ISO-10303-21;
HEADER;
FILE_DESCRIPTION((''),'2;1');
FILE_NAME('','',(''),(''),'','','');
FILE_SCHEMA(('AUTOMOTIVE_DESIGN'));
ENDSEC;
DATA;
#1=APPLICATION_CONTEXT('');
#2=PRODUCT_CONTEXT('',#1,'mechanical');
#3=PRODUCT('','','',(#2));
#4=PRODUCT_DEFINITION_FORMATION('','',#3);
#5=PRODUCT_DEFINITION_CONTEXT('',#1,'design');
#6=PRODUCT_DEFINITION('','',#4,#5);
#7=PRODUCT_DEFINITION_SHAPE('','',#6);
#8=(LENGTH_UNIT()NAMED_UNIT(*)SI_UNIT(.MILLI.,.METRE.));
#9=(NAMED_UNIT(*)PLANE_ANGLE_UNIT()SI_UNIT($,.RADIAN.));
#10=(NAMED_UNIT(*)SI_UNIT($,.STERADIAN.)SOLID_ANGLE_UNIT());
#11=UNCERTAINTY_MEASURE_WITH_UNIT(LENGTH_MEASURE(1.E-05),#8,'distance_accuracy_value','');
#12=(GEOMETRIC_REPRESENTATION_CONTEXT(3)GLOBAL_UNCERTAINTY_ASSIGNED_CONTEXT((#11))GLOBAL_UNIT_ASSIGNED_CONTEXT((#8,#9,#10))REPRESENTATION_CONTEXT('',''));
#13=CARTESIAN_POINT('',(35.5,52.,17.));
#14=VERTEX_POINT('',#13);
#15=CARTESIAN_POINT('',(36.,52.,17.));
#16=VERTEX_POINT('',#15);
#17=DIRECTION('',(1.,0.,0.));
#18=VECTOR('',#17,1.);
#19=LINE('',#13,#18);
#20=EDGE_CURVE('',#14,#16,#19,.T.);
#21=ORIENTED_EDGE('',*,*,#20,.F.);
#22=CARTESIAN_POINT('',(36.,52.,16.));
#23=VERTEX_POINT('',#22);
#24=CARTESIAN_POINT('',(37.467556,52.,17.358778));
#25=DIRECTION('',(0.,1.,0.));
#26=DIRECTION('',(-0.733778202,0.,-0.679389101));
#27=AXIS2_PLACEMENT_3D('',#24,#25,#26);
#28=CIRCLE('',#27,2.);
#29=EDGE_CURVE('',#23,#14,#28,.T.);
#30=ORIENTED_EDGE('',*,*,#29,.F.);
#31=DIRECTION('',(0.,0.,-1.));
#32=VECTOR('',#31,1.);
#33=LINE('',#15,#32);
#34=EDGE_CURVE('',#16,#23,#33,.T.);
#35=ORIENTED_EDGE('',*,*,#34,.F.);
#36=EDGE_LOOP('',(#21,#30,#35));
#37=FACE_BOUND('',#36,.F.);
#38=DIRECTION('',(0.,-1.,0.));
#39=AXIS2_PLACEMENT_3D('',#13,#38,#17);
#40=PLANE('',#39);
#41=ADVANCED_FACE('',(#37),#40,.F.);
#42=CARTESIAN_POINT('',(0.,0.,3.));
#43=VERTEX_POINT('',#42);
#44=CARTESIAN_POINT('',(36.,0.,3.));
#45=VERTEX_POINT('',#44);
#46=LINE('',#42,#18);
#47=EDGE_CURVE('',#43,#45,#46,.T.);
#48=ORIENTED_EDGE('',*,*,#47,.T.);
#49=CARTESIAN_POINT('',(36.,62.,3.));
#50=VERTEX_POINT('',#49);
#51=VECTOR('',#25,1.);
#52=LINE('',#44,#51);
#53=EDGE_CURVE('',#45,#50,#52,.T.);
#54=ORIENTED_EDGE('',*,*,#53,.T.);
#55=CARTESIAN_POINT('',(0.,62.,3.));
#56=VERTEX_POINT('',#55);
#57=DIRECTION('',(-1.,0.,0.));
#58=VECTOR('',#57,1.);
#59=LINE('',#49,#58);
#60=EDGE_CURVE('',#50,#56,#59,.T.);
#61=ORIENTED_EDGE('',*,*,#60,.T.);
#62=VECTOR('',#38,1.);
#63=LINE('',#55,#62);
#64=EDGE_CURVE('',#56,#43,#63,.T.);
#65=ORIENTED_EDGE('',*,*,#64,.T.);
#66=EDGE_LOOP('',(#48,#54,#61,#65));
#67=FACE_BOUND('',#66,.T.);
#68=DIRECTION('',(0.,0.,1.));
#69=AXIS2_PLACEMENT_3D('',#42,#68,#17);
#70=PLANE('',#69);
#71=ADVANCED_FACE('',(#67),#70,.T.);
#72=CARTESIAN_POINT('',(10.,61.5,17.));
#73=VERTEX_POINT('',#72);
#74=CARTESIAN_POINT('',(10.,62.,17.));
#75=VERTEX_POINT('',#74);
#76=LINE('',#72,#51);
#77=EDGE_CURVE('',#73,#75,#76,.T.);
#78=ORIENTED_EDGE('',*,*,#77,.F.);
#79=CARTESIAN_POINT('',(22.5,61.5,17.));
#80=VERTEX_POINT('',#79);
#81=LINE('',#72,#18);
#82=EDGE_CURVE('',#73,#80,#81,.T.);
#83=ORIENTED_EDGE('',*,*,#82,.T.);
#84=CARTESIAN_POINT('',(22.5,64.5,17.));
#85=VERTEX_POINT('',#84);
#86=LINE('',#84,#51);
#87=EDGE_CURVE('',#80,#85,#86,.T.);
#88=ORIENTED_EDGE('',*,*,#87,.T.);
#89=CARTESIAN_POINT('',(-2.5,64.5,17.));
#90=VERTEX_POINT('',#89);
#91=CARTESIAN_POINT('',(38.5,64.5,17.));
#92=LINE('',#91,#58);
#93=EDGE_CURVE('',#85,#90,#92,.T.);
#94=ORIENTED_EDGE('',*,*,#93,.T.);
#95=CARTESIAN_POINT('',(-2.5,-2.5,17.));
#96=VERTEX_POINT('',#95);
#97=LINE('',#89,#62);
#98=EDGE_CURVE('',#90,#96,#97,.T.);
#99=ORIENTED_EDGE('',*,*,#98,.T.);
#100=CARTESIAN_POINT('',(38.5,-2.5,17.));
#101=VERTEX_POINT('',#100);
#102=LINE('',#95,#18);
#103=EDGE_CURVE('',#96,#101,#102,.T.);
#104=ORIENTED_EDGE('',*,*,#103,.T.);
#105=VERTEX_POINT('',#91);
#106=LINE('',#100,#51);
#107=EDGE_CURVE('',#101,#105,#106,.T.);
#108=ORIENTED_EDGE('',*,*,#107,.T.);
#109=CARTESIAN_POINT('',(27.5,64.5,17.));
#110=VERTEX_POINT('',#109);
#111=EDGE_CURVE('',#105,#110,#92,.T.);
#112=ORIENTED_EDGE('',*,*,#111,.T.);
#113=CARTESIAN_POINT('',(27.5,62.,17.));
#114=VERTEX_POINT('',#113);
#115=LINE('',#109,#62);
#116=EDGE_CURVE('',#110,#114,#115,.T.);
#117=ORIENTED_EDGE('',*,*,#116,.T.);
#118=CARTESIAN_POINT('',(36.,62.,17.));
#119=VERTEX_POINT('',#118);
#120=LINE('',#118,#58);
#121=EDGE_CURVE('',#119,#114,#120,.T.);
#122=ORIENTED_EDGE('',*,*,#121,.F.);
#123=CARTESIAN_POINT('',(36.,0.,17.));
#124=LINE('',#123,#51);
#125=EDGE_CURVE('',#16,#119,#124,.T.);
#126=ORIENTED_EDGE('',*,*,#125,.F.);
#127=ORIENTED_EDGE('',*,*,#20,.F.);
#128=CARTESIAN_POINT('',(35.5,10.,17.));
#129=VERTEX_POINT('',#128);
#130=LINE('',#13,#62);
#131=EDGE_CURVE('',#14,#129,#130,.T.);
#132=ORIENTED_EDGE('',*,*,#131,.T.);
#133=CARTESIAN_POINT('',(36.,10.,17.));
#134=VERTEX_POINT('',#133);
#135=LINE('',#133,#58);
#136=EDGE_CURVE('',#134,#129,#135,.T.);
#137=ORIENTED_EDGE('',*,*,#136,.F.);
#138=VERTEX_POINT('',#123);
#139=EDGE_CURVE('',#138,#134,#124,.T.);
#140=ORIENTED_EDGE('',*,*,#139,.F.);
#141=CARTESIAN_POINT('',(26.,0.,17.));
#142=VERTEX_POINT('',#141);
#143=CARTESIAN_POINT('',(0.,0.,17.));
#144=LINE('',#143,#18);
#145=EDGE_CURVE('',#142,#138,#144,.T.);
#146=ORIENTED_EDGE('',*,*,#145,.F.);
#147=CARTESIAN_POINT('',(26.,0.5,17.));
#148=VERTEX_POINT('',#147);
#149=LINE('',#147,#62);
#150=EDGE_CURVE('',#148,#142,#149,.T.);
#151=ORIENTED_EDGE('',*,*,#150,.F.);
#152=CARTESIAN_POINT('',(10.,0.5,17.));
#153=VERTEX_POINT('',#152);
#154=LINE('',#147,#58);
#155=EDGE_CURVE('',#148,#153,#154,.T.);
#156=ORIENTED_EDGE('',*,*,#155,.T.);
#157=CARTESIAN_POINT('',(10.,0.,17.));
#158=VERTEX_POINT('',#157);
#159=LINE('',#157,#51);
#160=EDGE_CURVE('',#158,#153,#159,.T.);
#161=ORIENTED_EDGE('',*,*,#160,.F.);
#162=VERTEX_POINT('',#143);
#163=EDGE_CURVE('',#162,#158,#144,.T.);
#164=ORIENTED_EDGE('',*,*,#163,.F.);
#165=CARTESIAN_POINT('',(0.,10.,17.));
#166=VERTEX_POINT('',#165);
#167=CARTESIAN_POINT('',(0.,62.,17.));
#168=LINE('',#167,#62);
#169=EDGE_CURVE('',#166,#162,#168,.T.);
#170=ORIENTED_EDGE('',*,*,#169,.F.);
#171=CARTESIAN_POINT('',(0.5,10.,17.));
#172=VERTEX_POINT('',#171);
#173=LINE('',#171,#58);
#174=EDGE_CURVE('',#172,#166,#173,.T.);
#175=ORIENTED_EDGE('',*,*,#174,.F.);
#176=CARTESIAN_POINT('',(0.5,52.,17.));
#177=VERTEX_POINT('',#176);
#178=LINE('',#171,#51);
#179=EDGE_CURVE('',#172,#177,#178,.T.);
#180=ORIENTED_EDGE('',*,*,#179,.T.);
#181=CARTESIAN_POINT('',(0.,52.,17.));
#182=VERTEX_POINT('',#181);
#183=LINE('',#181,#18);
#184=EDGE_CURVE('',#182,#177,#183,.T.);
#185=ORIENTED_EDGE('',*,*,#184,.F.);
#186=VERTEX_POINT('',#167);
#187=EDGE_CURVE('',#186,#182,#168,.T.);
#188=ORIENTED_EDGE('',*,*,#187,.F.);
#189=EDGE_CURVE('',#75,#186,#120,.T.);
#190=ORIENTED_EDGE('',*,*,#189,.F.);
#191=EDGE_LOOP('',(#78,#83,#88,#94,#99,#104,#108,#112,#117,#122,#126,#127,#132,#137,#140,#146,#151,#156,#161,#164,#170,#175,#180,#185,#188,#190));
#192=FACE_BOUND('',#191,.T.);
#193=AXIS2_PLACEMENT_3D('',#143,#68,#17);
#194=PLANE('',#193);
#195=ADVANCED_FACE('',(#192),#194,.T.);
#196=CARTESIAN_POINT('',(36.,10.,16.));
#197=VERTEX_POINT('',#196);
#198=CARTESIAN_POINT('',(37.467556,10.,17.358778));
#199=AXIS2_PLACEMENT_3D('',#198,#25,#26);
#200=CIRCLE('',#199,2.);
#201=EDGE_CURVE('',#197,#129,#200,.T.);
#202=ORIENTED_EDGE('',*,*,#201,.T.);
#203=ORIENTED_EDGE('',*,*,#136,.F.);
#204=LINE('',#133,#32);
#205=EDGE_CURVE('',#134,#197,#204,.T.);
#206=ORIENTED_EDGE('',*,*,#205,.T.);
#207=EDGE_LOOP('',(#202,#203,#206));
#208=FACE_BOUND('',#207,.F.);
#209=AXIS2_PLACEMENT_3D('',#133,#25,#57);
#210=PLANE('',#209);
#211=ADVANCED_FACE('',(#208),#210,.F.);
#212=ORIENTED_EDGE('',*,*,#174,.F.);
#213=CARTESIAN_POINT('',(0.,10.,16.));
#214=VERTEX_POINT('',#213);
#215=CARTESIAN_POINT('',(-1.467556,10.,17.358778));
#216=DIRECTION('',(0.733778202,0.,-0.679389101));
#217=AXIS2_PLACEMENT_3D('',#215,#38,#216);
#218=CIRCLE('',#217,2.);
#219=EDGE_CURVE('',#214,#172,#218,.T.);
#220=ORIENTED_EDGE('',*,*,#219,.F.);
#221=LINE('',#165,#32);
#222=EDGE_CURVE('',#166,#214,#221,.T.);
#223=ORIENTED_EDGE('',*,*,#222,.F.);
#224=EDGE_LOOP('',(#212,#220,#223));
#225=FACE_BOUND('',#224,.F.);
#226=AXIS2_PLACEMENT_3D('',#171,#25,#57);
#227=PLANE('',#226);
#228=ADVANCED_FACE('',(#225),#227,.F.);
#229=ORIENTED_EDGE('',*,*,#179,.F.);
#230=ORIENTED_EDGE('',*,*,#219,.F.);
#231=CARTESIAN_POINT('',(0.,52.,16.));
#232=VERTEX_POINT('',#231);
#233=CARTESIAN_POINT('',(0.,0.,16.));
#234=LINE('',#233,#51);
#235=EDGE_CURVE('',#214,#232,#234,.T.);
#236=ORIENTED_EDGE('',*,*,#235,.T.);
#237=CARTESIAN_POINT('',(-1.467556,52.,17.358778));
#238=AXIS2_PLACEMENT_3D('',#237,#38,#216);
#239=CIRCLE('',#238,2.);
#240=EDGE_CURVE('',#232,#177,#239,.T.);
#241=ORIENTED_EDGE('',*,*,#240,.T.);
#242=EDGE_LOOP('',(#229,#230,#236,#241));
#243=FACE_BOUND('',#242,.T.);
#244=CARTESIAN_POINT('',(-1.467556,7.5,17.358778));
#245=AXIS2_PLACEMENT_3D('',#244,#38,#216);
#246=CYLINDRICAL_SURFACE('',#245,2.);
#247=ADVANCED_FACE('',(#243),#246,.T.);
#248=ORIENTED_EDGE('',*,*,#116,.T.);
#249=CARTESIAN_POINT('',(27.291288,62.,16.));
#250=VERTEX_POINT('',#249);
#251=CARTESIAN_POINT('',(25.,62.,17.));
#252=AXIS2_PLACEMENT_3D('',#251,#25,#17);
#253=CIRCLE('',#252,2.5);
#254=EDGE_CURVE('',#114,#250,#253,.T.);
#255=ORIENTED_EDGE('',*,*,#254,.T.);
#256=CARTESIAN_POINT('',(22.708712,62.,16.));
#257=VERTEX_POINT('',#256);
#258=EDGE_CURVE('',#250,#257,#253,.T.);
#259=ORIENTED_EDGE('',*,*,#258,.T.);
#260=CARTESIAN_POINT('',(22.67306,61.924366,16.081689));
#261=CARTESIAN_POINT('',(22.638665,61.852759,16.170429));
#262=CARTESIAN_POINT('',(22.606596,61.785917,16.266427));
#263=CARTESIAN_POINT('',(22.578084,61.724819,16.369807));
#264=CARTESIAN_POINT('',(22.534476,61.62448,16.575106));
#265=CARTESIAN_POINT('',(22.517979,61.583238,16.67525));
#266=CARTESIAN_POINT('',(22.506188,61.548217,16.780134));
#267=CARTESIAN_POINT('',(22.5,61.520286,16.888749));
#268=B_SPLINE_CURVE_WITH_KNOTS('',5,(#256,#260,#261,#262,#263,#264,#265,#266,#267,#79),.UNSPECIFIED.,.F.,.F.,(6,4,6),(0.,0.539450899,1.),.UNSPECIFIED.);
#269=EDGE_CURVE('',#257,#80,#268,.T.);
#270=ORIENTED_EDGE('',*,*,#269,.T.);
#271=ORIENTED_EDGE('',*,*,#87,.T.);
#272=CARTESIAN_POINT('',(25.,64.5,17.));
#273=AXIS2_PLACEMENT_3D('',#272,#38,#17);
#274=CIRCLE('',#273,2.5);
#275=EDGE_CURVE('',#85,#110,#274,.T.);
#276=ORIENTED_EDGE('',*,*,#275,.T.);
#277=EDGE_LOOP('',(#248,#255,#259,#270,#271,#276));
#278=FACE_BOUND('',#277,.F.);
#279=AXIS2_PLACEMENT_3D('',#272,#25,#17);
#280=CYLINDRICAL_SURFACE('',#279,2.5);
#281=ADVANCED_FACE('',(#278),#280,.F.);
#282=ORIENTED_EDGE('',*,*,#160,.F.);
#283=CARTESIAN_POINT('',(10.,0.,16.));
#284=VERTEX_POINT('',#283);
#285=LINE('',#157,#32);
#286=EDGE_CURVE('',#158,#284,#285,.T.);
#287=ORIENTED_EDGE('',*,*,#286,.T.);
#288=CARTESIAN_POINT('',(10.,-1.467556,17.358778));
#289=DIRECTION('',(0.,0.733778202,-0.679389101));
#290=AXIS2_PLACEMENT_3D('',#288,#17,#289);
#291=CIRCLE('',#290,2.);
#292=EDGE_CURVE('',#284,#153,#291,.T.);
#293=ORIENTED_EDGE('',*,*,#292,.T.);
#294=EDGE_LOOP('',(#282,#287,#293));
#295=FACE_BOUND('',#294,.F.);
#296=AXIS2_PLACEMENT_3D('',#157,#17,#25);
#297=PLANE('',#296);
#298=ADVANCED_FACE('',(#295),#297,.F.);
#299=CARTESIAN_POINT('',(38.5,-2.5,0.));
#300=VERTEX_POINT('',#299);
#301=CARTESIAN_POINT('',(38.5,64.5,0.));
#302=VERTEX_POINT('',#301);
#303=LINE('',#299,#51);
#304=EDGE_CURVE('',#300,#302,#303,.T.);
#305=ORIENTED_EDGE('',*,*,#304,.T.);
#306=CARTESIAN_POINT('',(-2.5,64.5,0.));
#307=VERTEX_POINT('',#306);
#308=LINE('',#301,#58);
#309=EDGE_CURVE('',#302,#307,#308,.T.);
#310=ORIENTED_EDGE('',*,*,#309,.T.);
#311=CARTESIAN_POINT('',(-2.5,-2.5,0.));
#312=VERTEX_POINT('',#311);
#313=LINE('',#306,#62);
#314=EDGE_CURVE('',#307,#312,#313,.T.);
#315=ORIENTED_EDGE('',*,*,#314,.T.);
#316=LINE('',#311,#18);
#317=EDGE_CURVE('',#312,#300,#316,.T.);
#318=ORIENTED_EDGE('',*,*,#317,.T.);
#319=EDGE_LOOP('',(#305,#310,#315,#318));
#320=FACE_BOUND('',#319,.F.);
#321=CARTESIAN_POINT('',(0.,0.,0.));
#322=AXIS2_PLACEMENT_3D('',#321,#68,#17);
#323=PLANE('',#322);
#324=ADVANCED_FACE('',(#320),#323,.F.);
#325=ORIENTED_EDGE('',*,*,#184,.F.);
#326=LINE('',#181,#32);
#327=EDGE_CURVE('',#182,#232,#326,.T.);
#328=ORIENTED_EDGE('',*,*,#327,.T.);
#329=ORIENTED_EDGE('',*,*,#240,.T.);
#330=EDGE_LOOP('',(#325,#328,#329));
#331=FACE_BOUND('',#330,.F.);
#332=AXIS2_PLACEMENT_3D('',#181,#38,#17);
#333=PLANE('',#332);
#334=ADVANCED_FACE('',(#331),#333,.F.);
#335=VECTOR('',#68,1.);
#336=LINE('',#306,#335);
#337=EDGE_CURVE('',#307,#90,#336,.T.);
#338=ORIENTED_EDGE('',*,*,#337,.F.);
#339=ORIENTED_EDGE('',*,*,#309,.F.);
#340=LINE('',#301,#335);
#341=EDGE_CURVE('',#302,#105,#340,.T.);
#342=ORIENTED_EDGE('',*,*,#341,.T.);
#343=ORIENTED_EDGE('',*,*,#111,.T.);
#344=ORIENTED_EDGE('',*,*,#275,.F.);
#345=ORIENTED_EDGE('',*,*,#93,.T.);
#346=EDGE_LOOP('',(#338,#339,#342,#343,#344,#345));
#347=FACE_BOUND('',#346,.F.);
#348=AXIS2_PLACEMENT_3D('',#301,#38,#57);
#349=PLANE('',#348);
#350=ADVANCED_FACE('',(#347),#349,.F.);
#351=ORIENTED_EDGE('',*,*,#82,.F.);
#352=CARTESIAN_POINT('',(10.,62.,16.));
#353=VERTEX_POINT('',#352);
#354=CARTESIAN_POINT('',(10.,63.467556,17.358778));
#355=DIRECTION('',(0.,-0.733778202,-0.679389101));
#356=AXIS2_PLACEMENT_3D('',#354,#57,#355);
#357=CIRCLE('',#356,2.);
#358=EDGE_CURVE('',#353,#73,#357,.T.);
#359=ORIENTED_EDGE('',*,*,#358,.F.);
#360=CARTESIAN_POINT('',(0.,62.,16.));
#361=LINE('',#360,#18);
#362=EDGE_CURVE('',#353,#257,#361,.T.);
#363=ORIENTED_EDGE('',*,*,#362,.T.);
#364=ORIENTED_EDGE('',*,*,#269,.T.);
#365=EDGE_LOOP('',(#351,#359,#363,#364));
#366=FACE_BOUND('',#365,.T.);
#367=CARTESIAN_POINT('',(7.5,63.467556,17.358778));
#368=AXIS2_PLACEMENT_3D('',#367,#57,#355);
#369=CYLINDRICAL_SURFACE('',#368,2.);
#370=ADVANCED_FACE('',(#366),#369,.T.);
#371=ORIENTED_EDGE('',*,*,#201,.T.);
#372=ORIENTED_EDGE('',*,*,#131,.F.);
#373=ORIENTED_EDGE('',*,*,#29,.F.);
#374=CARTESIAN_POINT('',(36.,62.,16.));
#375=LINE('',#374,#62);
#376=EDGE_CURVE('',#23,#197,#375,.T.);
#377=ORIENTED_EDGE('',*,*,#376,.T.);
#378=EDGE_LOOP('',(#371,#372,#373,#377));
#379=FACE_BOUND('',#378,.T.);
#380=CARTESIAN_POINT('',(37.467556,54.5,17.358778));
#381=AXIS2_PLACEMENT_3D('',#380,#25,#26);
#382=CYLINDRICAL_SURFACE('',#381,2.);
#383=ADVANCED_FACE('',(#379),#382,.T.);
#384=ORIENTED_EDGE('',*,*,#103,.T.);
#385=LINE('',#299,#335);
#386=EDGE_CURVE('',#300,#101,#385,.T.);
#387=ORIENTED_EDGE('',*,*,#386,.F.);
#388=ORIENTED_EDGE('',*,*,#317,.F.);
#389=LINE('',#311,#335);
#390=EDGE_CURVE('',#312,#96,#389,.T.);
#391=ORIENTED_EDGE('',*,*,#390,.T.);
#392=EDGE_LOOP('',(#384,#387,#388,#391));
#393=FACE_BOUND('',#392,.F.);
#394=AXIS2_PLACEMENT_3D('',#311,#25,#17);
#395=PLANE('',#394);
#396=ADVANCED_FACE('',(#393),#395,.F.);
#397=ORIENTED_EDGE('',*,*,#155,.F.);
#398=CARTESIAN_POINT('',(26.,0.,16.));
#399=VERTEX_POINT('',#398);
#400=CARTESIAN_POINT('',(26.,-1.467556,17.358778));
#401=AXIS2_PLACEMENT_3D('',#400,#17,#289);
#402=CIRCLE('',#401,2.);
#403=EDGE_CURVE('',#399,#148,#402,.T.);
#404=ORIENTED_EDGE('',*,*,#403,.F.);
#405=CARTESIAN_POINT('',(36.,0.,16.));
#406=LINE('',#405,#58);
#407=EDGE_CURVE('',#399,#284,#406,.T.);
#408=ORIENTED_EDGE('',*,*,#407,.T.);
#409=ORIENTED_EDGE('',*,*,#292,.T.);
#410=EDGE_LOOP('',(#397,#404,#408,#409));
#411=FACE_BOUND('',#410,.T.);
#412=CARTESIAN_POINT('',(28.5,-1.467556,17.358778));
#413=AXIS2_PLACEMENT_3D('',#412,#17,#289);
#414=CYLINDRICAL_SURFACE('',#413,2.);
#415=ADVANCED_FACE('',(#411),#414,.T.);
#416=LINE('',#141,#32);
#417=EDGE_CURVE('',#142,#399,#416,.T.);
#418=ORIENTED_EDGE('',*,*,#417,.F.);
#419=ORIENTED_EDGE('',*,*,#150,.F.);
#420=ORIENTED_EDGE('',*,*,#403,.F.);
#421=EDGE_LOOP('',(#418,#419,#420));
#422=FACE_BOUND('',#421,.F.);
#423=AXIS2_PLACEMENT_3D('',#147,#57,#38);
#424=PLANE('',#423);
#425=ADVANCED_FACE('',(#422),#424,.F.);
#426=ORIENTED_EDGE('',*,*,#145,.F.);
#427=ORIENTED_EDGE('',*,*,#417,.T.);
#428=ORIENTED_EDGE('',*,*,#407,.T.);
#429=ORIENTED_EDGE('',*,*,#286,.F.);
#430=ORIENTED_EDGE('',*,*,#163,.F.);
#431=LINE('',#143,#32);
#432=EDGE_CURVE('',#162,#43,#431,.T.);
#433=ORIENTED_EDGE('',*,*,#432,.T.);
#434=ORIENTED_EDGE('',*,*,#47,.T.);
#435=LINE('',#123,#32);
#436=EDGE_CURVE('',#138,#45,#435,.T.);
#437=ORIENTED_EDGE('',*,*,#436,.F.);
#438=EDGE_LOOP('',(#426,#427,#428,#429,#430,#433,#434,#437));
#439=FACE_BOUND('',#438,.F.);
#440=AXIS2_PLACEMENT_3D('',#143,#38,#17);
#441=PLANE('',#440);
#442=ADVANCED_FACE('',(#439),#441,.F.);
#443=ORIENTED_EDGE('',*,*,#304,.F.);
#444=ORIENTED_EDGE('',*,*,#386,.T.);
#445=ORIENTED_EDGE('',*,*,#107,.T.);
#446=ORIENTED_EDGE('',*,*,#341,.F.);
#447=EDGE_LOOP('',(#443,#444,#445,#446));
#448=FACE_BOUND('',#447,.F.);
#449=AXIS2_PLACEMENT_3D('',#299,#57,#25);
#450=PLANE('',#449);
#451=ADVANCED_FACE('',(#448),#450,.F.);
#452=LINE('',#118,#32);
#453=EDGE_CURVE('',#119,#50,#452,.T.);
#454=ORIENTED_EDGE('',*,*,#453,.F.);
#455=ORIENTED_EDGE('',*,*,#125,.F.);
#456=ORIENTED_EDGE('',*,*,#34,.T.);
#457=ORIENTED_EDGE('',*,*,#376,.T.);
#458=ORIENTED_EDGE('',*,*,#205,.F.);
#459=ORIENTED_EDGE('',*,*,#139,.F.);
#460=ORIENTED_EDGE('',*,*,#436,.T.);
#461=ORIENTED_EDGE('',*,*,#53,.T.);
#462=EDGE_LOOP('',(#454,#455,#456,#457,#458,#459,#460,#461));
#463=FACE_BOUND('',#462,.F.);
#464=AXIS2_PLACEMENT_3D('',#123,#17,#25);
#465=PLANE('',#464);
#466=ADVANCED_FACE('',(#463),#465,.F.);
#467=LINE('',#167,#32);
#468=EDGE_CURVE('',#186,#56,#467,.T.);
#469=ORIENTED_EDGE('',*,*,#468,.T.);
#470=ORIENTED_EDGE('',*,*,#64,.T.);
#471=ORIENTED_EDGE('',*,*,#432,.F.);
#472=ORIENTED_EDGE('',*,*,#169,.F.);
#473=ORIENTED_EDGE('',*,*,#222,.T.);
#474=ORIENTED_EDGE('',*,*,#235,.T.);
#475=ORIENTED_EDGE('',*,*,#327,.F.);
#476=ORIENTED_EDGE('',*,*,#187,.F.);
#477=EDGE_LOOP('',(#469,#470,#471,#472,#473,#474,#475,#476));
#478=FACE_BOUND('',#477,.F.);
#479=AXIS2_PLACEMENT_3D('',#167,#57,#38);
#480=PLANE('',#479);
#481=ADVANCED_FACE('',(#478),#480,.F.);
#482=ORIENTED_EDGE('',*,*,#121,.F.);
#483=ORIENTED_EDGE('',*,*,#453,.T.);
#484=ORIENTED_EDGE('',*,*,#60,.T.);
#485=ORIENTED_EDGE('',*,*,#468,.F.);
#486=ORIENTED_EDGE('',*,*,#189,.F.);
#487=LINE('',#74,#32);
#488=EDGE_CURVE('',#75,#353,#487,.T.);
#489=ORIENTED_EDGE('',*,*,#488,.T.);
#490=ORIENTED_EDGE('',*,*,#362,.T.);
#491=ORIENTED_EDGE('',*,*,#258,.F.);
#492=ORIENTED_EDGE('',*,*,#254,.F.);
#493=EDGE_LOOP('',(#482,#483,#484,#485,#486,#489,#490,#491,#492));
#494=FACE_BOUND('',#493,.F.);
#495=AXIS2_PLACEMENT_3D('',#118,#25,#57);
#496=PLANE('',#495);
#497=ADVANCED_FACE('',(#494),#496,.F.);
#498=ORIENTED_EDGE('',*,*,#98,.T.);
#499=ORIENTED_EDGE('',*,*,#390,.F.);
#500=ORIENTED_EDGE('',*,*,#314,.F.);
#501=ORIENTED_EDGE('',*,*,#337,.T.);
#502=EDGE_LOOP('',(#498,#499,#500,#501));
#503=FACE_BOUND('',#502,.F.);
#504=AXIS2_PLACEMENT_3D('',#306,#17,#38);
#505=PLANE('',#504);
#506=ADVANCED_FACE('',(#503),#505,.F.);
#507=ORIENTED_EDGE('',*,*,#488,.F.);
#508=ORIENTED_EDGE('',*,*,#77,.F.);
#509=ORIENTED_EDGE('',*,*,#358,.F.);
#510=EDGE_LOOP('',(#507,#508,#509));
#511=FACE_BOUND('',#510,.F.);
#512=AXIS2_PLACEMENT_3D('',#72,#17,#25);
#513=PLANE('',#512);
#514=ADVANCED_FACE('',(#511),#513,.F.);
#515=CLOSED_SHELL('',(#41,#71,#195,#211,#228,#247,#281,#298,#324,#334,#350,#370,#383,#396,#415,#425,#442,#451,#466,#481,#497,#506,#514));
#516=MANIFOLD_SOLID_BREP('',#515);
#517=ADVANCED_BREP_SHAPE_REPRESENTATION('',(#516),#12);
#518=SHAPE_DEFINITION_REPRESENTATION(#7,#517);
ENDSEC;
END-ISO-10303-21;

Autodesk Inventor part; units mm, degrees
ref_plane "YZ Plane" through (0, 0, 0) normal (1, 0, 0) x (0, 1, 0)
ref_plane "XZ Plane" through (0, 0, 0) normal (0, 1, 0) x (-1, 0, 0)
ref_plane "XY Plane" through (0, 0, 0) normal (0, 0, 1) x (1, 0, 0)
sketch "Sketch1" plane through (0, 0, 0) normal (0, 0, 1) x (1, 0, 0)
  line L0 (0, 0) -> (36, 0)
  line L1 (36, 0) -> (36, 62)
  line L2 (36, 62) -> (0, 62)
  line L3 (0, 62) -> (0, 0)
  line L4 (-2.5, -2.5) -> (38.5, -2.5)
  line L5 (38.5, -2.5) -> (38.5, 64.5)
  line L6 (38.5, 64.5) -> (-2.5, 64.5)
  line L7 (-2.5, 64.5) -> (-2.5, -2.5)
  dimension "d0" = 36
  dimension "d1" = 62
  dimension "d2" = 2.5
extrude "Extrusion1" add sketch "Sketch1" along normal blind 17 contours L3 L2 L1 L0 | L7 L6 L5 L4
sketch "Sketch2" plane through (0, 0, 17) normal (0, 0, 1) x (1, 0, 0)
  line L0 (-2.5, -2.5) -> (38.5, -2.5) projected
  line L1 (38.5, -2.5) -> (38.5, 64.5) projected
  line L2 (38.5, 64.5) -> (-2.5, 64.5) projected
  line L3 (-2.5, 64.5) -> (-2.5, -2.5) projected
  line L4 (0, 0) -> (36, 0)
  line L5 (36, 0) -> (36, 62)
  line L6 (36, 62) -> (0, 62)
  line L7 (0, 62) -> (0, 0)
  point P0 (0, 0)
  dimension "d5" = 2.5
extrude "Extrusion2" cut sketch "Sketch2" against normal blind 14 contours L7 L6 L5 L4
sketch "Sketch3" plane through (0, 0, 17) normal (0, 0, 1) x (1, 0, 0)
  line L0 (36, 0) -> (0, 0) projected
  line L1 (36, 62) -> (36, 0) projected
  line L2 (0, 62) -> (36, 62) projected
  line L3 (0, 0) -> (0, 62) projected
  line L4 (10, 61.5) -> (26, 61.5)
  line L5 (35.5, 52) -> (35.5, 10)
  line L6 (26, 0.5) -> (10, 0.5)
  line L7 (0.5, 10) -> (0.5, 52)
  line L8 (0, 52) -> (0.5, 52)
  line L9 (35.5, 52) -> (36, 52)
  line L10 (10, 61.5) -> (10, 62)
  line L11 (26, 62) -> (26, 61.5)
  line L12 (36, 10) -> (35.5, 10)
  line L13 (26, 0.5) -> (26, 0)
  line L14 (10, 0) -> (10, 0.5)
  line L15 (0.5, 10) -> (0, 10)
  point P0 (0, 0)
  dimension "d9" = 0.5
extrude "Extrusion3" add sketch "Sketch3" against normal blind 1 contours L0 L14 L6 L13 | L12 L5 L9 L1 | L3 L8 L7 L15 | L11 L4 L10 L2
fillet "Fillet1" radius 2 4 edges at (0.5, 31, 16) (18, 61.5, 16) (35.5, 31, 16) (18, 0.5, 16)
sketch "Sketch4" plane through (-2.5, 64.5, 0) normal (0, 1, 0) x (1, 0, 0)
  line L0 (41, -17) -> (0, -17) projected
  line L1 (20.5, -17) -> (27.5, -17)
  circle A0 centre (27.5, -17) radius 2.5
  point P0 (2.5, 0)
  dimension "d13" = 7
  dimension "d14" = 5
extrude "Extrusion4" cut sketch "Sketch4" against normal blind 4
properties part number "feeder_encolsure"
